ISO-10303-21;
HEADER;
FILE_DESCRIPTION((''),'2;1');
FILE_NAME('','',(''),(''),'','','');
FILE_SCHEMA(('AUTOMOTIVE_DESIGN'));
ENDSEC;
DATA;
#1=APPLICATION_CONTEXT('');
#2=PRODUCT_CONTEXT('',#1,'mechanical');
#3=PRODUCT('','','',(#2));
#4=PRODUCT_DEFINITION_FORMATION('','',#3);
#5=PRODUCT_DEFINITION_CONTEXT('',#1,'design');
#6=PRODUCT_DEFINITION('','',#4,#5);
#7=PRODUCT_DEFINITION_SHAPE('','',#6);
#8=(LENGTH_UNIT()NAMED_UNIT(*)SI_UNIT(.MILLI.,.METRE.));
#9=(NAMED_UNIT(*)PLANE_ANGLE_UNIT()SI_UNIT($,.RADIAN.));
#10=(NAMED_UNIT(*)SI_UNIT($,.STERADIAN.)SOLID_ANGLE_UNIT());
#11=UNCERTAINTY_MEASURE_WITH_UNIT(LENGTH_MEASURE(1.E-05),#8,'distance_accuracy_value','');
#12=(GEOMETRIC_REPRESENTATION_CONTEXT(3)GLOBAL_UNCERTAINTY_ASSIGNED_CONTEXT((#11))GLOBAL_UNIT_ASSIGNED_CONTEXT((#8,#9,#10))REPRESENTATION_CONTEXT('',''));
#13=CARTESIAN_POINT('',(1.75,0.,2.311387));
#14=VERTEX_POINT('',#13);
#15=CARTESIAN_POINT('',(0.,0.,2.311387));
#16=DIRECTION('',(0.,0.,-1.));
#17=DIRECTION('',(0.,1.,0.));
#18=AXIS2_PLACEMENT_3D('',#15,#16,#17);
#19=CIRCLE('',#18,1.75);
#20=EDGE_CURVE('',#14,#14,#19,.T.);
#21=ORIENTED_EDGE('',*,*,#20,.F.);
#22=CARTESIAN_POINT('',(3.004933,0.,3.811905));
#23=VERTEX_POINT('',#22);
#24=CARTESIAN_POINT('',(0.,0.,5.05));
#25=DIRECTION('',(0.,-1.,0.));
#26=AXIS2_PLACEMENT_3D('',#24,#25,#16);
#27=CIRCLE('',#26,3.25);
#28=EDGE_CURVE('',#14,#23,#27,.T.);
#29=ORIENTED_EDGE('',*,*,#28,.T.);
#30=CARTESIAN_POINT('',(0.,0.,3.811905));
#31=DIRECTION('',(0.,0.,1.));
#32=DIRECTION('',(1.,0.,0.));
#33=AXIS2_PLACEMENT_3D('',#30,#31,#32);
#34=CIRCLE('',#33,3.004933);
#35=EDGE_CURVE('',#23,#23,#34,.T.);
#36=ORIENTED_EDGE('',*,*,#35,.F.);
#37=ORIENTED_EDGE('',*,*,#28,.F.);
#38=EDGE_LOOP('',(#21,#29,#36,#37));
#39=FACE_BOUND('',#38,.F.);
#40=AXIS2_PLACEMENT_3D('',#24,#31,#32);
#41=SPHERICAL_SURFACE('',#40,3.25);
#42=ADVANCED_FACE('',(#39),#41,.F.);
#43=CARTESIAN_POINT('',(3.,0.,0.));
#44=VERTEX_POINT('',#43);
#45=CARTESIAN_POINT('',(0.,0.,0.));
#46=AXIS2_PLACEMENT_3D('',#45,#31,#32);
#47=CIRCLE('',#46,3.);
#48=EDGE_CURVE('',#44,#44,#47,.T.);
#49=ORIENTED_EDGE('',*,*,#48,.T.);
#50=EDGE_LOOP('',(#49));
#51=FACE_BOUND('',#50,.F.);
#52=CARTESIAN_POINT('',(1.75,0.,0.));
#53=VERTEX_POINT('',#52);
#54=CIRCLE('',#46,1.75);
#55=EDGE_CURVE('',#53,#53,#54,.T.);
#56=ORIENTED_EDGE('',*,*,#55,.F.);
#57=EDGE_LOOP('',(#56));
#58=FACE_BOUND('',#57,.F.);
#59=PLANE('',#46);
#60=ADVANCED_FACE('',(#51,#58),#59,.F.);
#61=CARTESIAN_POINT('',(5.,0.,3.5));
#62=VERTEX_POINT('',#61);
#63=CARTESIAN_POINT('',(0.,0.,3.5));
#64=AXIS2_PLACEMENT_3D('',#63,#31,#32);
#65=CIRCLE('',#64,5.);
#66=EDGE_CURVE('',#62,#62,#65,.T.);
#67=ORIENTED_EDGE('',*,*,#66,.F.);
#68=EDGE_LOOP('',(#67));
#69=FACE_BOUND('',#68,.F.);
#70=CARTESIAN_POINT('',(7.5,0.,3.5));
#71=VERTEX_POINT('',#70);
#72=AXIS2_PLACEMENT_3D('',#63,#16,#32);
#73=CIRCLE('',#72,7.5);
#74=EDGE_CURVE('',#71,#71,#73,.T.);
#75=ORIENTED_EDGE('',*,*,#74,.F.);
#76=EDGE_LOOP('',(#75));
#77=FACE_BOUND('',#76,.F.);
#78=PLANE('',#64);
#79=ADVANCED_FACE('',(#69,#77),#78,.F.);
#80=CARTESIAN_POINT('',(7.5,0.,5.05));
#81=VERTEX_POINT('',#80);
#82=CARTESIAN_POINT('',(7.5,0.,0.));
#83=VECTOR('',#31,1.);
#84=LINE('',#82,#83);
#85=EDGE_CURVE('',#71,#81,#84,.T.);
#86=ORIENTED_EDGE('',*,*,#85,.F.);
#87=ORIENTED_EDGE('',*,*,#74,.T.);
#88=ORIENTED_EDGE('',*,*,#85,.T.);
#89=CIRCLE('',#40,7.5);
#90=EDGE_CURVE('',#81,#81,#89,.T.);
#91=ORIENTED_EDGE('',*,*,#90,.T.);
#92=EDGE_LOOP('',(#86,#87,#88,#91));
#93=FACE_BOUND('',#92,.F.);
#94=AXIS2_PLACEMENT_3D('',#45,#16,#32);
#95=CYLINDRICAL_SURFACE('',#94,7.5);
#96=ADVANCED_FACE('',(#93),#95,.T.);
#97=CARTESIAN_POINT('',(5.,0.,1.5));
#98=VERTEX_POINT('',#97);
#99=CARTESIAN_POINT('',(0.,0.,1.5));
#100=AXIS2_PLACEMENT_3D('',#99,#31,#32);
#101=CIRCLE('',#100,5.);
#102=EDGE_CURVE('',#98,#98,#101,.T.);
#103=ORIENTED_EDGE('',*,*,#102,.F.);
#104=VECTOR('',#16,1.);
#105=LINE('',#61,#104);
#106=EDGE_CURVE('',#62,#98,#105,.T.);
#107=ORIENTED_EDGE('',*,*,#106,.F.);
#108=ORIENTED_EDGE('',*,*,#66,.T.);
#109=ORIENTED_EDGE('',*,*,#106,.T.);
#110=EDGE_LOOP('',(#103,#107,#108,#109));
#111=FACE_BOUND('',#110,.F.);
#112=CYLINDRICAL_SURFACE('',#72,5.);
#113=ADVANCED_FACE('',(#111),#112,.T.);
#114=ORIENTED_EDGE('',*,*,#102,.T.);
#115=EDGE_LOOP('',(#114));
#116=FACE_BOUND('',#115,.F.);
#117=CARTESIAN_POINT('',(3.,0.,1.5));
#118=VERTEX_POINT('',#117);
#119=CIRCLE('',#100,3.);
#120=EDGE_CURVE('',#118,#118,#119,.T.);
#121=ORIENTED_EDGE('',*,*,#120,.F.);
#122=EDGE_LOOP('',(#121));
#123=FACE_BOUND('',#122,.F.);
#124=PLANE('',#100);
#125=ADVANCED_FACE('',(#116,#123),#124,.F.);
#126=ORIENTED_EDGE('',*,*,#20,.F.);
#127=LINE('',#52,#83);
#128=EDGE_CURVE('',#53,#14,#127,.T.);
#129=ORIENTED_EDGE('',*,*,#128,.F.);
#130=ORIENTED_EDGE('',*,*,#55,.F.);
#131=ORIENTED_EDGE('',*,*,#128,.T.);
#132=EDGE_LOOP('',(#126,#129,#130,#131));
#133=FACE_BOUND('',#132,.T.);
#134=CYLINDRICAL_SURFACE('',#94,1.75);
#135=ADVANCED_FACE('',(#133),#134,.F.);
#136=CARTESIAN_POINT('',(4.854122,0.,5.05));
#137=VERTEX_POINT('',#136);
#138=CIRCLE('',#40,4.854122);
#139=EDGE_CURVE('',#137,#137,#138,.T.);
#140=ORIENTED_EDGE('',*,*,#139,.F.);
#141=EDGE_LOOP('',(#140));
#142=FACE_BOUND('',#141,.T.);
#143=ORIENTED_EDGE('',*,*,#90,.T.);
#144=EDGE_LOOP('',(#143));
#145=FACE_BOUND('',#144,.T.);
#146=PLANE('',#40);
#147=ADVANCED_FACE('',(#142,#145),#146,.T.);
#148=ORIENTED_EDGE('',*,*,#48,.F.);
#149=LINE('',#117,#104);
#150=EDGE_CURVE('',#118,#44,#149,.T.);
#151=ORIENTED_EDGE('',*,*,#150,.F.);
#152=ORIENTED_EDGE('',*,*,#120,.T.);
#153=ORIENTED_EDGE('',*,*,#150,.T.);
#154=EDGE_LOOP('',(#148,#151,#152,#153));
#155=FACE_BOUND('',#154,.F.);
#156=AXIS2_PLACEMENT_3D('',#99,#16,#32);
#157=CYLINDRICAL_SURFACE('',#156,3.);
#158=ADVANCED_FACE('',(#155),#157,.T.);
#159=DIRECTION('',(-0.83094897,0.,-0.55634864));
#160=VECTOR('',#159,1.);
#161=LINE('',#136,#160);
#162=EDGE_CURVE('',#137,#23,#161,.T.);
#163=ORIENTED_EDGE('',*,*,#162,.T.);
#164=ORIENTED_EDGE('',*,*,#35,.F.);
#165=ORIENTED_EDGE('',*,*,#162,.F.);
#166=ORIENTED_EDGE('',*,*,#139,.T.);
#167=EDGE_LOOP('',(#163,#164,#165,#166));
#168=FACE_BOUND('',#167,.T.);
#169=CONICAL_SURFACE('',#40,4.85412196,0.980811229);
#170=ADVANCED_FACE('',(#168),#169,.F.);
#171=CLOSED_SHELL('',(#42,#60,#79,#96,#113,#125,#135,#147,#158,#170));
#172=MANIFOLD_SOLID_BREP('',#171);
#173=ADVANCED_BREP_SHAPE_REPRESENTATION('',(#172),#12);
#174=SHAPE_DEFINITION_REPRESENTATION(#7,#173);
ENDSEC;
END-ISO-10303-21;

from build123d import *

# Parameters (mm, degrees)
F0_R     = 7.5
F0_R_2   = 1.75
F1_DEPTH = 5.05


# Not quite as in the source:
# - a fillet or chamfer that OpenCascade refuses, or shapes differently, is made with other operations: its cross-section is extruded or revolved along the edge and cut away or added


with BuildPart() as f1:
    # F0 (on Top) → F1 (new body)
    with BuildSketch(Plane.XY):
        Circle(F0_R)
        Circle(F0_R_2, mode=Mode.SUBTRACT)
    extrude(amount=F1_DEPTH)

    # F2 (on Front) → F3 (revolve, cut)
    with BuildSketch(Plane.XZ):
        Polygon((3, 1.5), (3, 0), (7.75, 0), (7.75, 3.5), (5, 3.5), (5, 1.5), align=None)
        with BuildLine():
            Line((0, 5.05), (0, 1.8))
            ThreePointArc((0, 1.8), (3.25, 5.05), (0, 8.3))
            Line((0, 8.3), (0, 5.05))
        make_face()
    revolve(axis=Axis((0, 0, 2.525), (0, 0, 1)), mode=Mode.SUBTRACT)

    # F4: chamfer of 2 on 1 edges, made by hand

    # F4_s1 → F4_t2 (revolve, cut)
    with BuildSketch(Plane.XZ):
        with BuildLine():
            Line((4.8541219597, 5.05), (3.0049326417, 3.8119047619))
            ThreePointArc((3.0049326417, 3.8119047619), (3.1823683685, 4.3904307714), (3.25, 5.05))
            Line((3.25, 5.05), (4.8541219597, 5.05))
        make_face()
    revolve(axis=Axis((0, 0, 5.05), (0, 0, 1)), mode=Mode.SUBTRACT)


solid = f1.part
